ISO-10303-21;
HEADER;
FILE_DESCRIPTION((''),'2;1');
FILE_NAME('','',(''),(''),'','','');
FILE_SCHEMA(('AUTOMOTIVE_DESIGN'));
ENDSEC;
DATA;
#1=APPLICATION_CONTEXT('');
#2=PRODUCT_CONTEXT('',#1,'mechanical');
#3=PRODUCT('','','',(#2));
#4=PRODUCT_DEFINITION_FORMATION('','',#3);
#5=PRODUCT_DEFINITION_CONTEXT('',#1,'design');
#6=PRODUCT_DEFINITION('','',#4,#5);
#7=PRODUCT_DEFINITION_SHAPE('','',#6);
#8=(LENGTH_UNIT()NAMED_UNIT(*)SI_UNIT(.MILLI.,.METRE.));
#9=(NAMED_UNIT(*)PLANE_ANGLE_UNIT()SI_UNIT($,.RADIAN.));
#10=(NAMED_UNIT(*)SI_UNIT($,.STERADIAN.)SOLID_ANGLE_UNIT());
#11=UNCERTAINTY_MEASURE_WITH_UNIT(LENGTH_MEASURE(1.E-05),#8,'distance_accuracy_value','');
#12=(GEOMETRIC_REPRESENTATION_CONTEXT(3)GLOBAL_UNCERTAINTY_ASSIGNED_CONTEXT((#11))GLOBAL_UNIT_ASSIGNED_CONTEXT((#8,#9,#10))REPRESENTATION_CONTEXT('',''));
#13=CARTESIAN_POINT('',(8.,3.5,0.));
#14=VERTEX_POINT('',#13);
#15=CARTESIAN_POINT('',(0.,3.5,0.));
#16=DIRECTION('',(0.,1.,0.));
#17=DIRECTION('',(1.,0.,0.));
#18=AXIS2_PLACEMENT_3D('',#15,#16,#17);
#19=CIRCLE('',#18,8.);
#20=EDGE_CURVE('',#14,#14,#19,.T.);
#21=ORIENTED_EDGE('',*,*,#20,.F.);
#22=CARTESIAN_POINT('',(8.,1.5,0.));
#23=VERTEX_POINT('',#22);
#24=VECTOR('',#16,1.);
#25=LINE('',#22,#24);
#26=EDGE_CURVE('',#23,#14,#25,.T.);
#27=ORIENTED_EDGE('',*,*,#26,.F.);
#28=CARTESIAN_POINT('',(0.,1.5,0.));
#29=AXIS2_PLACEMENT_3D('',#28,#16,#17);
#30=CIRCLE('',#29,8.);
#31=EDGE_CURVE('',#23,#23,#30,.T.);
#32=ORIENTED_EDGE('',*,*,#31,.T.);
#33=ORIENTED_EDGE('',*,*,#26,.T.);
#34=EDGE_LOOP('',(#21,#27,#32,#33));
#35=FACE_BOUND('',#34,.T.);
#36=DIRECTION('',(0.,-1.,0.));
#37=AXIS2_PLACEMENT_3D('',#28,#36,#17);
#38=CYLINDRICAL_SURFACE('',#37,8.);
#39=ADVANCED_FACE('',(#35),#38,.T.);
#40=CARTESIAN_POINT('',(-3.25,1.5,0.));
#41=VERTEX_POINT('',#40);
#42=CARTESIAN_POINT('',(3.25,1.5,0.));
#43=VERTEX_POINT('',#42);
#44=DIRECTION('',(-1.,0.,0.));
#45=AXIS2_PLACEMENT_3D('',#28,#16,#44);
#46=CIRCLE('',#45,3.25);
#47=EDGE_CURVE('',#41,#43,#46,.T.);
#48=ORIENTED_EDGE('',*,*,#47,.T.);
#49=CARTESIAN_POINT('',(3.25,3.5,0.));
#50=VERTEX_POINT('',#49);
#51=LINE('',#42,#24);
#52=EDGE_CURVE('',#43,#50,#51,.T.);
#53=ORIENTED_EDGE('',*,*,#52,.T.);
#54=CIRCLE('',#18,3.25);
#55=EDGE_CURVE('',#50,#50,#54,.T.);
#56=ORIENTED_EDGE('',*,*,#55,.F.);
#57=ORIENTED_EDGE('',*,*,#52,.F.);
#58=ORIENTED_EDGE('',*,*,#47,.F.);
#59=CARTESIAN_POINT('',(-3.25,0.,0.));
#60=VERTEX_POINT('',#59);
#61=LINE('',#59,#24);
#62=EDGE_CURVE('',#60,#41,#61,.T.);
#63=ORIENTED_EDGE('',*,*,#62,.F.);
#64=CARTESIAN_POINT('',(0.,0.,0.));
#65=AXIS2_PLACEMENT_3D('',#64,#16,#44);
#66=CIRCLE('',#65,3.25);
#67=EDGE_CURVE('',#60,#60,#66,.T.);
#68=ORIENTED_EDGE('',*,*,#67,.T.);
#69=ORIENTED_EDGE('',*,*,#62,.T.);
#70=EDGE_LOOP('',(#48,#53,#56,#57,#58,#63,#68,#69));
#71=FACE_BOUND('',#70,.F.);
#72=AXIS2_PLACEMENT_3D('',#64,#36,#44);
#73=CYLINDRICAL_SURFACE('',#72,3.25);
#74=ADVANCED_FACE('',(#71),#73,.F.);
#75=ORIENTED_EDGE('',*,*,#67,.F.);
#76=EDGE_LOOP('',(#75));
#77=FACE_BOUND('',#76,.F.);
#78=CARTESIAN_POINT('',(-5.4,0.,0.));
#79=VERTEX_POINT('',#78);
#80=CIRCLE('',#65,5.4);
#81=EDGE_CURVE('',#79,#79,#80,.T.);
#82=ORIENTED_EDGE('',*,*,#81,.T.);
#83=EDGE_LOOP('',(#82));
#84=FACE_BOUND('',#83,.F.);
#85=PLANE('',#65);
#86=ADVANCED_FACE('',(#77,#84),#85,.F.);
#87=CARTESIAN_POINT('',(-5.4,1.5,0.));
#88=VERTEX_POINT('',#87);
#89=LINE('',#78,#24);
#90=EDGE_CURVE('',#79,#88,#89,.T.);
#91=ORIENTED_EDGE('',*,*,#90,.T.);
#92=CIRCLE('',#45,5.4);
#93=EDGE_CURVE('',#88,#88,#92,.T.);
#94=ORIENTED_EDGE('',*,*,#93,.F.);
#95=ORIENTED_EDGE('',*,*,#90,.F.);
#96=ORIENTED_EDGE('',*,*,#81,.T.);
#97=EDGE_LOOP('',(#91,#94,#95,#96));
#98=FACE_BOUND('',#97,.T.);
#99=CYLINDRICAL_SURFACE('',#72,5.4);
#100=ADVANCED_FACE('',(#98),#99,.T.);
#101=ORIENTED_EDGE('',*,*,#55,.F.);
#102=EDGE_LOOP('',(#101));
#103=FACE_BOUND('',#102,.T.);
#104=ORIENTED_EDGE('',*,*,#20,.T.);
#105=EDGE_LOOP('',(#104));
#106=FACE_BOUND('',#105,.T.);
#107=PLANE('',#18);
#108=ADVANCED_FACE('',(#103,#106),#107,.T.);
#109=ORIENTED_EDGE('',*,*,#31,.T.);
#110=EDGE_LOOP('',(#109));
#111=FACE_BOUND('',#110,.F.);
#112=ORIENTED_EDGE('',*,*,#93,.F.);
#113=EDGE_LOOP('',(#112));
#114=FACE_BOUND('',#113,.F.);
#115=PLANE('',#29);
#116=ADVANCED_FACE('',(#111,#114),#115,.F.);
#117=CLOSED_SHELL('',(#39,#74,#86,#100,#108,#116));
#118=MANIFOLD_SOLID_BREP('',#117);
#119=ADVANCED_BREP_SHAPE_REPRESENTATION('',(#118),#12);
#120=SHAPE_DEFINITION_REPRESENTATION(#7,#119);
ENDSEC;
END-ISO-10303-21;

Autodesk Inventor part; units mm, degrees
ref_plane "YZ Plane" through (0, 0, 0) normal (1, 0, 0) x (0, 1, 0)
ref_plane "XZ Plane" through (0, 0, 0) normal (0, 1, 0) x (-1, 0, 0)
ref_plane "XY Plane" through (0, 0, 0) normal (0, 0, 1) x (1, 0, 0)
sketch "Sketch1" plane through (0, 0, 0) normal (0, 1, 0) x (-1, 0, 0)
  circle A0 centre (0, 0) radius 5.4
  circle A1 centre (0, 0) radius 3.25
  dimension "d0" = 10.8
  dimension "d1" = 6.5
extrude "Extrusion1" add sketch "Sketch1" along normal blind 1.5
sketch "Sketch2" plane through (0, 1.5, 0) normal (0, 1, 0) x (1, 0, 0)
  circle A0 centre (0, 0) radius 5.4 projected
  circle A1 centre (0, 0) radius 3.25 projected
  circle A2 centre (0, 0) radius 8
  dimension "d4" = 16
extrude "Extrusion2" add sketch "Sketch2" along normal blind 2 contours A0 | A2
properties part number "distancni_krouzek_loziska_top"
